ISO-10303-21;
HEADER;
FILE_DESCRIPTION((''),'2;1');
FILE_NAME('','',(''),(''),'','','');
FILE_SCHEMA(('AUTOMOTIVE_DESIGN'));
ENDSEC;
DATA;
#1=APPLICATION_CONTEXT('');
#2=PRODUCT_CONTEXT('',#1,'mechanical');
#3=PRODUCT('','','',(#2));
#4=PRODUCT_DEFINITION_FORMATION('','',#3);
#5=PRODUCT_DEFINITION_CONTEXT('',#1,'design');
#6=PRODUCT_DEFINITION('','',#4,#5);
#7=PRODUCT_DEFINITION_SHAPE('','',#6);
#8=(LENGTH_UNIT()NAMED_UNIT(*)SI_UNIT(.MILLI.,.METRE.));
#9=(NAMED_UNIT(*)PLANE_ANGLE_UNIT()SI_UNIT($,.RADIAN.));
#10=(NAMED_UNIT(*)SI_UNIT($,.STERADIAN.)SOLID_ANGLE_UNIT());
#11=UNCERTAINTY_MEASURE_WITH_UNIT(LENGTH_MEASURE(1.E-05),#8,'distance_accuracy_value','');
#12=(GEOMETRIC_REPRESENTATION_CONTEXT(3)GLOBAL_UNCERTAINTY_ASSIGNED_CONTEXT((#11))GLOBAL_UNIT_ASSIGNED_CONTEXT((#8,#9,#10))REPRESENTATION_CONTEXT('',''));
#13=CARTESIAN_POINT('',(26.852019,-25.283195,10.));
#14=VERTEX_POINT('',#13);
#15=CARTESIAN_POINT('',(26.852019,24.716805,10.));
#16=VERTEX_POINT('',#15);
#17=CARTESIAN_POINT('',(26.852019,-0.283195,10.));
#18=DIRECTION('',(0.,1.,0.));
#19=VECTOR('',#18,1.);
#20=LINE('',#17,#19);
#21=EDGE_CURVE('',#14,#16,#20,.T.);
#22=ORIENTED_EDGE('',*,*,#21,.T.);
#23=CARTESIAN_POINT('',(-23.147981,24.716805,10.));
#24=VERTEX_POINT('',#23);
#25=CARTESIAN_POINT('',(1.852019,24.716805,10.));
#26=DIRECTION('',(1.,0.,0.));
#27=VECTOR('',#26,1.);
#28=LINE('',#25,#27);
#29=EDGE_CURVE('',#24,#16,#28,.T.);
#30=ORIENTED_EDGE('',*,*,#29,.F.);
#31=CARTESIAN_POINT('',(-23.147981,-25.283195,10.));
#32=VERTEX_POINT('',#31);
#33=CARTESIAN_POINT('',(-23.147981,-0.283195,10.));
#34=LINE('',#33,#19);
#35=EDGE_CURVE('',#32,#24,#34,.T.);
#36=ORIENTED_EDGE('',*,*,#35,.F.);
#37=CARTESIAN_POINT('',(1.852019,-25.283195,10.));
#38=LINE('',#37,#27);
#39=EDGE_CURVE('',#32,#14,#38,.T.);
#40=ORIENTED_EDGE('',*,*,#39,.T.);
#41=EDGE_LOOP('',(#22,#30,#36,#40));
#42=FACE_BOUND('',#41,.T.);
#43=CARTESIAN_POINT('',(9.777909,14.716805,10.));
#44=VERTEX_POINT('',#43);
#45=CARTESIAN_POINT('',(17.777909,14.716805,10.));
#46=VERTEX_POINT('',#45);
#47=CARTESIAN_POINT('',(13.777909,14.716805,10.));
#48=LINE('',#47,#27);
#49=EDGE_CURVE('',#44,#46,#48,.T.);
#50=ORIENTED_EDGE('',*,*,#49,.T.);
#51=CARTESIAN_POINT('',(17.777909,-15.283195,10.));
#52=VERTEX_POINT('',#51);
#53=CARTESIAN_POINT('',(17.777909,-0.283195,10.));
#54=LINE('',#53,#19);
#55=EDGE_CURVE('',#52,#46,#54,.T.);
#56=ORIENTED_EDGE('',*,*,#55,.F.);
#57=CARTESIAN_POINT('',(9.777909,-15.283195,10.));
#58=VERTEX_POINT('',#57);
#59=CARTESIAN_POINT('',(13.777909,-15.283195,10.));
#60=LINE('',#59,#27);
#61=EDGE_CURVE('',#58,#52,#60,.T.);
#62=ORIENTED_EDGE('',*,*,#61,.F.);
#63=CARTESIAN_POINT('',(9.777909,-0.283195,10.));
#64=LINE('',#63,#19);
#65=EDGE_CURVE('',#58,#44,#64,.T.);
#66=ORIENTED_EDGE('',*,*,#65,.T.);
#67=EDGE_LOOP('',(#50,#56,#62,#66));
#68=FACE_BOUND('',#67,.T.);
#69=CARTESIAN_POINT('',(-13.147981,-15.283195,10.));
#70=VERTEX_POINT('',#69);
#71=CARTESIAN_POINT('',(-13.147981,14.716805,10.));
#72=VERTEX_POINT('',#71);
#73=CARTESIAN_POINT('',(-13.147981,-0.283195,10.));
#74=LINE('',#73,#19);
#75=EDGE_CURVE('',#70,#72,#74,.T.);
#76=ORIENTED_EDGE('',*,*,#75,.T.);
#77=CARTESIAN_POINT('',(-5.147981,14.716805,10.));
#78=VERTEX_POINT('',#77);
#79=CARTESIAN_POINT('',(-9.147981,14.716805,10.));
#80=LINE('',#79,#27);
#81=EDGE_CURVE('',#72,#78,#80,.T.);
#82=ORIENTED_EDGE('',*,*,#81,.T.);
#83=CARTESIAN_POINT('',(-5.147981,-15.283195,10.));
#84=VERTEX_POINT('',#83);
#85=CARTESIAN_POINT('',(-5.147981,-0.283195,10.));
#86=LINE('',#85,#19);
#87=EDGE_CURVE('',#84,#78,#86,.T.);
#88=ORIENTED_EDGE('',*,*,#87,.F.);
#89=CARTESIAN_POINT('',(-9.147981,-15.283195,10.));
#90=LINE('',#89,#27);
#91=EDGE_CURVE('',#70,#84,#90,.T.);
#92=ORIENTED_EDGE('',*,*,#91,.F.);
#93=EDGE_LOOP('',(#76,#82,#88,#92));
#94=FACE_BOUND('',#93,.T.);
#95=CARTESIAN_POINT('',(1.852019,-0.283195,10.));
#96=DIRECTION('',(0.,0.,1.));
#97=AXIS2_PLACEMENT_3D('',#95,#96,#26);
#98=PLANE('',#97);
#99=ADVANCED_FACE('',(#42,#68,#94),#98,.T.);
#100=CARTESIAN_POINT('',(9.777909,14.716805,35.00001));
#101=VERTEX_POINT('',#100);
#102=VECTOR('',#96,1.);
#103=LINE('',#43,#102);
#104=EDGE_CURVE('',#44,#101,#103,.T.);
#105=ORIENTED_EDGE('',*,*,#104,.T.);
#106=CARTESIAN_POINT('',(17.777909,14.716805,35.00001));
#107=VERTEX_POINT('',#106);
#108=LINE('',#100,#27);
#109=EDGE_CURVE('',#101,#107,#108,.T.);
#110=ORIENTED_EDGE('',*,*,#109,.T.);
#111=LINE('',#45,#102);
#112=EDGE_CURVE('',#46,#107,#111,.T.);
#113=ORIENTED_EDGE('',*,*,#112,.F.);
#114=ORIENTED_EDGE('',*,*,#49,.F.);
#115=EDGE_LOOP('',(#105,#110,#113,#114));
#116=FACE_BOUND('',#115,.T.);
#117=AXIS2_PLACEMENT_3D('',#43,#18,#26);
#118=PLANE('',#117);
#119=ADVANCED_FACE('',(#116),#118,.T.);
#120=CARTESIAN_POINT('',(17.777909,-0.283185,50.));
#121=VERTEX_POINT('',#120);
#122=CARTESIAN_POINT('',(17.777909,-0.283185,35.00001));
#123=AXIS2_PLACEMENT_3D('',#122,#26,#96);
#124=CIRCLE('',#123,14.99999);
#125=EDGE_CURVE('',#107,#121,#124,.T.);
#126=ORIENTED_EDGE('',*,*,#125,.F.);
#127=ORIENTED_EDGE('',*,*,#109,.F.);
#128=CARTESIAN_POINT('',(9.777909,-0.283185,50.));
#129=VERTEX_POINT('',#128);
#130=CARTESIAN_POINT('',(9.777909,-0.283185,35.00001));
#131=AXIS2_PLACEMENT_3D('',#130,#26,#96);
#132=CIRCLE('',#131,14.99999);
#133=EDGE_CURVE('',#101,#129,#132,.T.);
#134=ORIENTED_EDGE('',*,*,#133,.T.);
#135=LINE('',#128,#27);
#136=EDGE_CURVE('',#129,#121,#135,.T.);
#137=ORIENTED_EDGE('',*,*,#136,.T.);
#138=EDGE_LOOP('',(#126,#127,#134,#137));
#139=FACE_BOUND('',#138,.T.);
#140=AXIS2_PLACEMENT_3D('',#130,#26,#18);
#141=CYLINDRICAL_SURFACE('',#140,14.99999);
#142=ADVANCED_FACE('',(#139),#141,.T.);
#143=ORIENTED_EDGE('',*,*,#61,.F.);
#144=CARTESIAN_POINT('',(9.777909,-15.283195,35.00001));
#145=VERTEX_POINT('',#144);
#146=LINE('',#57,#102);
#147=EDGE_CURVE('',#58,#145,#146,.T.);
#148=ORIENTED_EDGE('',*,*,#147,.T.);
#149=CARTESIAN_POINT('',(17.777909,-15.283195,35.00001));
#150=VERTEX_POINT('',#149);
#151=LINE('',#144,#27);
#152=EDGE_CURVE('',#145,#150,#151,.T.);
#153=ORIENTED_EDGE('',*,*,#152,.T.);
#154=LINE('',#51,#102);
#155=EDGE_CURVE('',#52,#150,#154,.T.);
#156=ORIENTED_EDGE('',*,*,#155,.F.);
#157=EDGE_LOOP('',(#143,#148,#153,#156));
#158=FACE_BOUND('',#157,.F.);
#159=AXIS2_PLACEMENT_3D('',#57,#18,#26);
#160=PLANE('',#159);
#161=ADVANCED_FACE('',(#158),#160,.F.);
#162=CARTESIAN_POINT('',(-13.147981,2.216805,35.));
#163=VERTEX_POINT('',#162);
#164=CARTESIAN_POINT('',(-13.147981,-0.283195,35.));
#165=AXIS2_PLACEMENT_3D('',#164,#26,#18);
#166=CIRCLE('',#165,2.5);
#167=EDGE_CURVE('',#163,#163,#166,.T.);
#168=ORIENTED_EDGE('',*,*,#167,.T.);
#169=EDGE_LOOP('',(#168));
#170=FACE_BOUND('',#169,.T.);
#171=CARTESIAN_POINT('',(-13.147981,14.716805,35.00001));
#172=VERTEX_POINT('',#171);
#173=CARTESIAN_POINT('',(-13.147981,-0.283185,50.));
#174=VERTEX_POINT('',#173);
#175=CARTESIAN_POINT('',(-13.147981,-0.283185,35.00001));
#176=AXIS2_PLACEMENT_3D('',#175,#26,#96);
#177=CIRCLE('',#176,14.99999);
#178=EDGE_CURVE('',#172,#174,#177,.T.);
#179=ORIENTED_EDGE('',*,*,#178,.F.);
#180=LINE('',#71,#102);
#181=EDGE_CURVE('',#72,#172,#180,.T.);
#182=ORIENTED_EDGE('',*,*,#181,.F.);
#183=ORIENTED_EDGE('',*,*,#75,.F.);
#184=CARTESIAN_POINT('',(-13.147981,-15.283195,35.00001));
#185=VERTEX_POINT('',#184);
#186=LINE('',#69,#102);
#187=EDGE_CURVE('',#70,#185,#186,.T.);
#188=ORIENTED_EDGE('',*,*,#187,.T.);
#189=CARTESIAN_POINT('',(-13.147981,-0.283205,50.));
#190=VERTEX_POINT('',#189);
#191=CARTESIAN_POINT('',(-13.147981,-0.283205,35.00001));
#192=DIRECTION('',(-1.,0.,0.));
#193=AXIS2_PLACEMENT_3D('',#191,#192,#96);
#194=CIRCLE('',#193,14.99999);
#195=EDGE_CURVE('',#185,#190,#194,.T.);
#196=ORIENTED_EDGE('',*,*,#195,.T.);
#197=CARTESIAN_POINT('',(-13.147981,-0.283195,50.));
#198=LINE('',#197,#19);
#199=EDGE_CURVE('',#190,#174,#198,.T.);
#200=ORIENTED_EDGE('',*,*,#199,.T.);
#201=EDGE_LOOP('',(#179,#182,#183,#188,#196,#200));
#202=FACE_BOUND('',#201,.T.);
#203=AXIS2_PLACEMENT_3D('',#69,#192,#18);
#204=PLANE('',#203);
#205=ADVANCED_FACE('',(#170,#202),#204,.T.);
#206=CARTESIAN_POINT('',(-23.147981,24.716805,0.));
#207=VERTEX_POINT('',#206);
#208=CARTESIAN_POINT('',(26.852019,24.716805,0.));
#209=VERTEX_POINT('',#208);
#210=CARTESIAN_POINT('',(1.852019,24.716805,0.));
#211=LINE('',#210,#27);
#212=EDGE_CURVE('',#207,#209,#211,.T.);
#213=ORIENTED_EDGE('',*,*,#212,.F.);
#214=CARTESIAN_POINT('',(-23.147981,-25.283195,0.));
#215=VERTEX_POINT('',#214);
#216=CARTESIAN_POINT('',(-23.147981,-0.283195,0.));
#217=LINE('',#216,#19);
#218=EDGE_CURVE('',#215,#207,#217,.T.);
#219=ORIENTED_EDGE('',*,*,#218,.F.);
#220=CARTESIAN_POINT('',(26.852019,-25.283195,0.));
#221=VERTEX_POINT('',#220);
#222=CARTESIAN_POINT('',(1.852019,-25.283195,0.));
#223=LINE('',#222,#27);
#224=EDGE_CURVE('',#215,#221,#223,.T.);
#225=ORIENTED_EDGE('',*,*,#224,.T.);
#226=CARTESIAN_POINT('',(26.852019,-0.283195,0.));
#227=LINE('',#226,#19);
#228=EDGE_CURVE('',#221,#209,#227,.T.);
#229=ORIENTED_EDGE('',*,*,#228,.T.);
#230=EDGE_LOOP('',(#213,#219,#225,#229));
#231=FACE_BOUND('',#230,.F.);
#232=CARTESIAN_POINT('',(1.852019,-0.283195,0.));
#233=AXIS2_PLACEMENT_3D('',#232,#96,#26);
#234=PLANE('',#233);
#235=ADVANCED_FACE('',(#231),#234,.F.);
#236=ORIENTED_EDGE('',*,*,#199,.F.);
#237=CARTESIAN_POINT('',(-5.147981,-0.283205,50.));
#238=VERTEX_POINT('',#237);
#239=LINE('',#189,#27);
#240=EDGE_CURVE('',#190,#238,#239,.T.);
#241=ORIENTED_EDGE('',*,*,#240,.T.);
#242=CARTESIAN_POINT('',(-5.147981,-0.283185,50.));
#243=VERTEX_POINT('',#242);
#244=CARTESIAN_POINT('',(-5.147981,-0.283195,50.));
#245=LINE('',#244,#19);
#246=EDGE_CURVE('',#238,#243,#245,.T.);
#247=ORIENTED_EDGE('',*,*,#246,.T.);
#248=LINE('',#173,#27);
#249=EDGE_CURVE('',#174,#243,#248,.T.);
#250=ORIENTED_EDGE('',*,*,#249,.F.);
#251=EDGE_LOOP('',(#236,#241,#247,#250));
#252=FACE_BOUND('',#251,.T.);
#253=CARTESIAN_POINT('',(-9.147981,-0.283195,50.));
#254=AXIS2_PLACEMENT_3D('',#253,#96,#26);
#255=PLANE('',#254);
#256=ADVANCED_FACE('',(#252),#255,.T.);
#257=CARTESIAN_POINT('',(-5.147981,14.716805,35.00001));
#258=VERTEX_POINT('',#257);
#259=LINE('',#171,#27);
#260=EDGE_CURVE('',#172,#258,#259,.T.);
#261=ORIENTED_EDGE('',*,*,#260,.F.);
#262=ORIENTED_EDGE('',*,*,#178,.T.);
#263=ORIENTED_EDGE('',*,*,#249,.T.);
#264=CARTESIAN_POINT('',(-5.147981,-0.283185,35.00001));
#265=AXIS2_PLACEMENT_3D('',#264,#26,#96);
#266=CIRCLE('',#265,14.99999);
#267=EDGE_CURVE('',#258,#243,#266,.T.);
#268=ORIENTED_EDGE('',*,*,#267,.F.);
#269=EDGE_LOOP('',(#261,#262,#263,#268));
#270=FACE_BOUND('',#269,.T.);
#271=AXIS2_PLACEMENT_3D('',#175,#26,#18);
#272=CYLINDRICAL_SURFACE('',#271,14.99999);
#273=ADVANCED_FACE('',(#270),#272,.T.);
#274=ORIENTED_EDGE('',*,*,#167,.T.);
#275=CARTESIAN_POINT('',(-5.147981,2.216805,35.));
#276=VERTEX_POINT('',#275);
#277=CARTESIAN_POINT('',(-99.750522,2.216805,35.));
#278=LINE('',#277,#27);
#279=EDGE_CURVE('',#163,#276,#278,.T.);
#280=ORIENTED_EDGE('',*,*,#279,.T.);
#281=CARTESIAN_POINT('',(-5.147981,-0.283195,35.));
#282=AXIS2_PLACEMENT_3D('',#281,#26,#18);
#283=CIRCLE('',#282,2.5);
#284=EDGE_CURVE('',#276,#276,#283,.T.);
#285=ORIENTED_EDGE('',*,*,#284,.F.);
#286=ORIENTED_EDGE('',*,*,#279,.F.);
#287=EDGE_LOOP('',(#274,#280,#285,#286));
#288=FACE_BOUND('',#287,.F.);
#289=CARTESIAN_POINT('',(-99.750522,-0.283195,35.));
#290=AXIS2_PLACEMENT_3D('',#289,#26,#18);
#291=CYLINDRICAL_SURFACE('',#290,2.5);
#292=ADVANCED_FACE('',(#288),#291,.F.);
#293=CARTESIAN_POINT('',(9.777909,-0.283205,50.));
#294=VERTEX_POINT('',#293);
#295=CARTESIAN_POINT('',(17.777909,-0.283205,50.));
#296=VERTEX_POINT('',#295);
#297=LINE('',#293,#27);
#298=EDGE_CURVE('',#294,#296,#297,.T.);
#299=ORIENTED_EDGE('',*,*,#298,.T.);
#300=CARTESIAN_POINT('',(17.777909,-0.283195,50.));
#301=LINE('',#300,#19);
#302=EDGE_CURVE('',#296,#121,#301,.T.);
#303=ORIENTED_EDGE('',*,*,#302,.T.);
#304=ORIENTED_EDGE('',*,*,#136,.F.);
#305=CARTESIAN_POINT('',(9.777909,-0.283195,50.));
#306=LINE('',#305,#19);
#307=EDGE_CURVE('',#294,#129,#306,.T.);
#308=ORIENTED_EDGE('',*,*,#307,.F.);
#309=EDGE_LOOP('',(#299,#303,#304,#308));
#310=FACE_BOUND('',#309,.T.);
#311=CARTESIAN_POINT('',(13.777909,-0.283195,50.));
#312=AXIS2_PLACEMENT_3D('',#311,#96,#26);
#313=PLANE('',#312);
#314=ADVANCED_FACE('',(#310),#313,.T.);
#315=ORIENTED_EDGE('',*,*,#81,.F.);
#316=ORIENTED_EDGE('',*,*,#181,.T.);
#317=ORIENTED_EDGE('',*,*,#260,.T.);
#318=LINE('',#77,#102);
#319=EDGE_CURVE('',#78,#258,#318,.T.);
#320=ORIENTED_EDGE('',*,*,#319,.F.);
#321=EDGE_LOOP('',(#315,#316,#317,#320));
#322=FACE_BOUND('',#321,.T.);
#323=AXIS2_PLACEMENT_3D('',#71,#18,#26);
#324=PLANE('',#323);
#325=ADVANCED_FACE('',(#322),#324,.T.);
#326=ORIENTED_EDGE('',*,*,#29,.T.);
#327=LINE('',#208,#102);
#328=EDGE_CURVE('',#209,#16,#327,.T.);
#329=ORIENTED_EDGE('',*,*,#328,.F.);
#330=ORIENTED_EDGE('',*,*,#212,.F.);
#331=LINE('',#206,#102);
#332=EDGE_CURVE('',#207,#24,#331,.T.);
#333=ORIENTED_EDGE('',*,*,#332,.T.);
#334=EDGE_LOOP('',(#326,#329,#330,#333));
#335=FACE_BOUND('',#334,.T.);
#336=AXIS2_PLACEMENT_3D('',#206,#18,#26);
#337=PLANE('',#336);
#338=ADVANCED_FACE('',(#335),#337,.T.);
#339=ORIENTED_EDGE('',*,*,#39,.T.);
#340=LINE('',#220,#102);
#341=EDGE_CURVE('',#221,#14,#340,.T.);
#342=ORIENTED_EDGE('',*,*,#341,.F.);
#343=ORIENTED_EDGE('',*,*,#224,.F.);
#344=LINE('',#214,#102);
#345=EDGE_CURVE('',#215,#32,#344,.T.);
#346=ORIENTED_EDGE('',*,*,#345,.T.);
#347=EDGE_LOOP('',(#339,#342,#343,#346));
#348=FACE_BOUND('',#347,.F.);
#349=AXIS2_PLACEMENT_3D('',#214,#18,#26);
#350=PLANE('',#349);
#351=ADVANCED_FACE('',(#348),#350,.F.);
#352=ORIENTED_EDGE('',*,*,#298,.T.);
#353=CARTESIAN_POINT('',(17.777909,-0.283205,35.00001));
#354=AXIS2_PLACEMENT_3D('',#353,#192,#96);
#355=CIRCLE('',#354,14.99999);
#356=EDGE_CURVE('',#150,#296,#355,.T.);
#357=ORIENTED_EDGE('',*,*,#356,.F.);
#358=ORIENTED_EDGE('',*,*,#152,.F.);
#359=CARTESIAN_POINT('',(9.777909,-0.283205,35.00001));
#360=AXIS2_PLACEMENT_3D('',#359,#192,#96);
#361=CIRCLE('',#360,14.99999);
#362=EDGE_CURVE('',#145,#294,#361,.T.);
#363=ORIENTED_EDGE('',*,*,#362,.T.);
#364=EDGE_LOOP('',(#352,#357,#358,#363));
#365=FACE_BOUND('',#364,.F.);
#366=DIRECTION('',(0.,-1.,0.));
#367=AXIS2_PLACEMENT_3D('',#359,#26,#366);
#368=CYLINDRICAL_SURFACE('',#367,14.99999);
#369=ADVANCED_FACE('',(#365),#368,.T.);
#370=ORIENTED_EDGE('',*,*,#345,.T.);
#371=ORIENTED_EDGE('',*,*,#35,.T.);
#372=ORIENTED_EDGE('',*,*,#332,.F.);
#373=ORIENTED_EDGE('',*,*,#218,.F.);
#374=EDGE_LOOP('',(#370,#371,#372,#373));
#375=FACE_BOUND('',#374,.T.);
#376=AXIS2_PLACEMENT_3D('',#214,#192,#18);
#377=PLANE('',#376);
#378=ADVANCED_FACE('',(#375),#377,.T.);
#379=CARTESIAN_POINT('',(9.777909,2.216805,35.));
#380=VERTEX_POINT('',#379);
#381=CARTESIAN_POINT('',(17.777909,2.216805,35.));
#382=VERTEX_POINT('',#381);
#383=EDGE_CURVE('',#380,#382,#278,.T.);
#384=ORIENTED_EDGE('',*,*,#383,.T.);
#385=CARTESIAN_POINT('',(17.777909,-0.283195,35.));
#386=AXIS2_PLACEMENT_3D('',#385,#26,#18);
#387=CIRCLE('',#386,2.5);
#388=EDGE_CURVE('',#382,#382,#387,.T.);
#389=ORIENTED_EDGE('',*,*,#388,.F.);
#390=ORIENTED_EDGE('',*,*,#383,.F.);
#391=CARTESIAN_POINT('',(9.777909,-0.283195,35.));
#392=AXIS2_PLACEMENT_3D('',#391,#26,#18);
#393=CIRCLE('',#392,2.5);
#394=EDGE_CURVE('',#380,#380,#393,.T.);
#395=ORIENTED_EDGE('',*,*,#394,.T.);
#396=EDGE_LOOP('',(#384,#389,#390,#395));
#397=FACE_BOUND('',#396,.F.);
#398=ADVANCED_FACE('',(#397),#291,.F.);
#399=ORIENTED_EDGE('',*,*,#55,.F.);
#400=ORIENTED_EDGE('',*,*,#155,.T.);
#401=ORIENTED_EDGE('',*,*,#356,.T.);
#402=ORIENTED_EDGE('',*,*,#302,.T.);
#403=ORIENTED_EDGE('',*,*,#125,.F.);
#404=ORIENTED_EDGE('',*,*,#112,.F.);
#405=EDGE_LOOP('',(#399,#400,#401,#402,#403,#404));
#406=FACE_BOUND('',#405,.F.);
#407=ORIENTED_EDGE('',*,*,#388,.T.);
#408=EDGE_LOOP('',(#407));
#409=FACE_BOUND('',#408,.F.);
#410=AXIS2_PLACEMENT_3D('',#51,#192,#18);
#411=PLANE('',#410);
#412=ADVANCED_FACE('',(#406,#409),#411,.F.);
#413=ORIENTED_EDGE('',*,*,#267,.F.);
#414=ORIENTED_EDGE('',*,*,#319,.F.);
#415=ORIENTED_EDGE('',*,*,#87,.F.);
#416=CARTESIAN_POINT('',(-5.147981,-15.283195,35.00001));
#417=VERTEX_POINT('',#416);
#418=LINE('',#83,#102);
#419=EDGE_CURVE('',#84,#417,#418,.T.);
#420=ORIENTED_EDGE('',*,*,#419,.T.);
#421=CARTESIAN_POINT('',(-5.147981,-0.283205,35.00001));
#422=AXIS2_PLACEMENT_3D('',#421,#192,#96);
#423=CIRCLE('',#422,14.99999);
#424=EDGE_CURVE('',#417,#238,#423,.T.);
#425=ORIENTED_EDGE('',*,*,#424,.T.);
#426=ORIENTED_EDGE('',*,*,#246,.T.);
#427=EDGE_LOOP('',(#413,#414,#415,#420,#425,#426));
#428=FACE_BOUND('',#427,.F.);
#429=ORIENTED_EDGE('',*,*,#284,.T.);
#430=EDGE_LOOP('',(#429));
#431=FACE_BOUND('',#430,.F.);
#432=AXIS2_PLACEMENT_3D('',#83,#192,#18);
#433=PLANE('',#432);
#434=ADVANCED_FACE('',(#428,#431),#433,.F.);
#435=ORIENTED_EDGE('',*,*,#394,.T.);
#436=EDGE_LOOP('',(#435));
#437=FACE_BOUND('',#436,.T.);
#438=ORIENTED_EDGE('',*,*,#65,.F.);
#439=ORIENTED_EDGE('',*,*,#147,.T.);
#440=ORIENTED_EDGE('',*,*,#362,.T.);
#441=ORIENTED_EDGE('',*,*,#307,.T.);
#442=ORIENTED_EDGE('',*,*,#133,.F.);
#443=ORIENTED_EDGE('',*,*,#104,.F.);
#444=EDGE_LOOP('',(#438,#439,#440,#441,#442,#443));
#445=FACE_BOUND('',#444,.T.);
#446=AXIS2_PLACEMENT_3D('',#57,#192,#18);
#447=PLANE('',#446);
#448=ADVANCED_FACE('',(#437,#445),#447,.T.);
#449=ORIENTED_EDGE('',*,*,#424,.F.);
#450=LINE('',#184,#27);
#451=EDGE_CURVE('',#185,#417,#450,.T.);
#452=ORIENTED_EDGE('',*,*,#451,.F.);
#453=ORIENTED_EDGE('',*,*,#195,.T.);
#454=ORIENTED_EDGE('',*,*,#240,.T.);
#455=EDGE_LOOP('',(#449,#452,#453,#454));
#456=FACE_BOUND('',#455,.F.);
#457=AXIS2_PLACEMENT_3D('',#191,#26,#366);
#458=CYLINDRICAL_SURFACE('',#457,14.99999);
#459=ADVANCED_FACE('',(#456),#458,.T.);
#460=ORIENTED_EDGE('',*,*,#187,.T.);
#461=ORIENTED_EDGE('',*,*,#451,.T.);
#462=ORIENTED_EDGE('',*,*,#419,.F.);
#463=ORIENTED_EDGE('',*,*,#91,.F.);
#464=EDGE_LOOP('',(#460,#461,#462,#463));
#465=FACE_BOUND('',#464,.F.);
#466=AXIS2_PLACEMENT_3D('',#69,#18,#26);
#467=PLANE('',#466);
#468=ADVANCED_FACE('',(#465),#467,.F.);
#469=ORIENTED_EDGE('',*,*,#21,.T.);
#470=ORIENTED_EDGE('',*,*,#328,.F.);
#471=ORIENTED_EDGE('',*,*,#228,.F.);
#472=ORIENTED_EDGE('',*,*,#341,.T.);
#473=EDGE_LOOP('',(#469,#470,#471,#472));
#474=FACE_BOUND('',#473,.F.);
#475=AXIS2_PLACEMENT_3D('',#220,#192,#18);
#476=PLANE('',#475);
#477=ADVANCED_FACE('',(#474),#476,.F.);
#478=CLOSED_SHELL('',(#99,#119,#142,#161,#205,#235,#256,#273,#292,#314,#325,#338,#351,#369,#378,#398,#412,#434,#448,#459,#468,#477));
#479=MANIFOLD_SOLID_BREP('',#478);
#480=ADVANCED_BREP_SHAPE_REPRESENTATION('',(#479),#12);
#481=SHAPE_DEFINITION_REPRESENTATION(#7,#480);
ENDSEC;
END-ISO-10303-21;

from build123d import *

# Parameters (mm, degrees)
F0_W     = 50
F0_H     = 50
F1_DEPTH = 10
F2_W     = 8
F2_H     = 30
F4_DEPTH = 40
F3_W     = 8
F3_H     = 30
F5_DEPTH = 40
F6_R     = 14.99999
F8_D     = 5


# Not quite as in the source:
# - a fillet or chamfer is up to 0.001 mm smaller than in the source, because OpenCascade refuses the exact size


with BuildPart() as f1:
    # F0 (on Top) → F1 (new body)
    with BuildSketch(Plane.XY):
        with Locations((1.8520187587, -0.2831950238)):
            Rectangle(F0_W, F0_H)
    extrude(amount=F1_DEPTH)

    # F2 (on face) → F4 (join)
    with BuildSketch(Plane.XY.offset(10)):
        with Locations((-9.1479812413, -0.2831950238)):
            Rectangle(F2_W, F2_H)
    extrude(amount=F4_DEPTH)

    # F3 (on face) → F5 (join)
    with BuildSketch(Plane.XY.offset(10)):
        with Locations((13.7779086391, -0.2831950238)):
            Rectangle(F3_W, F3_H)
    extrude(amount=F5_DEPTH)

    # F6 (radius 15 in the source; OpenCascade refuses exactly that, so slightly less here)
    f6_edges = [f1.edges().sort_by_distance(p)[0] for p in [
        (-9.147981, -15.283195, 50),
        (13.777909, -15.283195, 50),
        (-9.147981, 14.716805, 50),
        (13.777909, 14.716805, 50),
    ]]
    fillet(f6_edges, radius=F6_R)

    # F8 (through all)
    with Locations(Plane(origin=(-13.1479812413, 0, 0), x_dir=(0, -1, 0), z_dir=(-1, 0, 0))):
        with Locations((0.2831950238, 35)):
            Hole(F8_D / 2)


solid = f1.part
